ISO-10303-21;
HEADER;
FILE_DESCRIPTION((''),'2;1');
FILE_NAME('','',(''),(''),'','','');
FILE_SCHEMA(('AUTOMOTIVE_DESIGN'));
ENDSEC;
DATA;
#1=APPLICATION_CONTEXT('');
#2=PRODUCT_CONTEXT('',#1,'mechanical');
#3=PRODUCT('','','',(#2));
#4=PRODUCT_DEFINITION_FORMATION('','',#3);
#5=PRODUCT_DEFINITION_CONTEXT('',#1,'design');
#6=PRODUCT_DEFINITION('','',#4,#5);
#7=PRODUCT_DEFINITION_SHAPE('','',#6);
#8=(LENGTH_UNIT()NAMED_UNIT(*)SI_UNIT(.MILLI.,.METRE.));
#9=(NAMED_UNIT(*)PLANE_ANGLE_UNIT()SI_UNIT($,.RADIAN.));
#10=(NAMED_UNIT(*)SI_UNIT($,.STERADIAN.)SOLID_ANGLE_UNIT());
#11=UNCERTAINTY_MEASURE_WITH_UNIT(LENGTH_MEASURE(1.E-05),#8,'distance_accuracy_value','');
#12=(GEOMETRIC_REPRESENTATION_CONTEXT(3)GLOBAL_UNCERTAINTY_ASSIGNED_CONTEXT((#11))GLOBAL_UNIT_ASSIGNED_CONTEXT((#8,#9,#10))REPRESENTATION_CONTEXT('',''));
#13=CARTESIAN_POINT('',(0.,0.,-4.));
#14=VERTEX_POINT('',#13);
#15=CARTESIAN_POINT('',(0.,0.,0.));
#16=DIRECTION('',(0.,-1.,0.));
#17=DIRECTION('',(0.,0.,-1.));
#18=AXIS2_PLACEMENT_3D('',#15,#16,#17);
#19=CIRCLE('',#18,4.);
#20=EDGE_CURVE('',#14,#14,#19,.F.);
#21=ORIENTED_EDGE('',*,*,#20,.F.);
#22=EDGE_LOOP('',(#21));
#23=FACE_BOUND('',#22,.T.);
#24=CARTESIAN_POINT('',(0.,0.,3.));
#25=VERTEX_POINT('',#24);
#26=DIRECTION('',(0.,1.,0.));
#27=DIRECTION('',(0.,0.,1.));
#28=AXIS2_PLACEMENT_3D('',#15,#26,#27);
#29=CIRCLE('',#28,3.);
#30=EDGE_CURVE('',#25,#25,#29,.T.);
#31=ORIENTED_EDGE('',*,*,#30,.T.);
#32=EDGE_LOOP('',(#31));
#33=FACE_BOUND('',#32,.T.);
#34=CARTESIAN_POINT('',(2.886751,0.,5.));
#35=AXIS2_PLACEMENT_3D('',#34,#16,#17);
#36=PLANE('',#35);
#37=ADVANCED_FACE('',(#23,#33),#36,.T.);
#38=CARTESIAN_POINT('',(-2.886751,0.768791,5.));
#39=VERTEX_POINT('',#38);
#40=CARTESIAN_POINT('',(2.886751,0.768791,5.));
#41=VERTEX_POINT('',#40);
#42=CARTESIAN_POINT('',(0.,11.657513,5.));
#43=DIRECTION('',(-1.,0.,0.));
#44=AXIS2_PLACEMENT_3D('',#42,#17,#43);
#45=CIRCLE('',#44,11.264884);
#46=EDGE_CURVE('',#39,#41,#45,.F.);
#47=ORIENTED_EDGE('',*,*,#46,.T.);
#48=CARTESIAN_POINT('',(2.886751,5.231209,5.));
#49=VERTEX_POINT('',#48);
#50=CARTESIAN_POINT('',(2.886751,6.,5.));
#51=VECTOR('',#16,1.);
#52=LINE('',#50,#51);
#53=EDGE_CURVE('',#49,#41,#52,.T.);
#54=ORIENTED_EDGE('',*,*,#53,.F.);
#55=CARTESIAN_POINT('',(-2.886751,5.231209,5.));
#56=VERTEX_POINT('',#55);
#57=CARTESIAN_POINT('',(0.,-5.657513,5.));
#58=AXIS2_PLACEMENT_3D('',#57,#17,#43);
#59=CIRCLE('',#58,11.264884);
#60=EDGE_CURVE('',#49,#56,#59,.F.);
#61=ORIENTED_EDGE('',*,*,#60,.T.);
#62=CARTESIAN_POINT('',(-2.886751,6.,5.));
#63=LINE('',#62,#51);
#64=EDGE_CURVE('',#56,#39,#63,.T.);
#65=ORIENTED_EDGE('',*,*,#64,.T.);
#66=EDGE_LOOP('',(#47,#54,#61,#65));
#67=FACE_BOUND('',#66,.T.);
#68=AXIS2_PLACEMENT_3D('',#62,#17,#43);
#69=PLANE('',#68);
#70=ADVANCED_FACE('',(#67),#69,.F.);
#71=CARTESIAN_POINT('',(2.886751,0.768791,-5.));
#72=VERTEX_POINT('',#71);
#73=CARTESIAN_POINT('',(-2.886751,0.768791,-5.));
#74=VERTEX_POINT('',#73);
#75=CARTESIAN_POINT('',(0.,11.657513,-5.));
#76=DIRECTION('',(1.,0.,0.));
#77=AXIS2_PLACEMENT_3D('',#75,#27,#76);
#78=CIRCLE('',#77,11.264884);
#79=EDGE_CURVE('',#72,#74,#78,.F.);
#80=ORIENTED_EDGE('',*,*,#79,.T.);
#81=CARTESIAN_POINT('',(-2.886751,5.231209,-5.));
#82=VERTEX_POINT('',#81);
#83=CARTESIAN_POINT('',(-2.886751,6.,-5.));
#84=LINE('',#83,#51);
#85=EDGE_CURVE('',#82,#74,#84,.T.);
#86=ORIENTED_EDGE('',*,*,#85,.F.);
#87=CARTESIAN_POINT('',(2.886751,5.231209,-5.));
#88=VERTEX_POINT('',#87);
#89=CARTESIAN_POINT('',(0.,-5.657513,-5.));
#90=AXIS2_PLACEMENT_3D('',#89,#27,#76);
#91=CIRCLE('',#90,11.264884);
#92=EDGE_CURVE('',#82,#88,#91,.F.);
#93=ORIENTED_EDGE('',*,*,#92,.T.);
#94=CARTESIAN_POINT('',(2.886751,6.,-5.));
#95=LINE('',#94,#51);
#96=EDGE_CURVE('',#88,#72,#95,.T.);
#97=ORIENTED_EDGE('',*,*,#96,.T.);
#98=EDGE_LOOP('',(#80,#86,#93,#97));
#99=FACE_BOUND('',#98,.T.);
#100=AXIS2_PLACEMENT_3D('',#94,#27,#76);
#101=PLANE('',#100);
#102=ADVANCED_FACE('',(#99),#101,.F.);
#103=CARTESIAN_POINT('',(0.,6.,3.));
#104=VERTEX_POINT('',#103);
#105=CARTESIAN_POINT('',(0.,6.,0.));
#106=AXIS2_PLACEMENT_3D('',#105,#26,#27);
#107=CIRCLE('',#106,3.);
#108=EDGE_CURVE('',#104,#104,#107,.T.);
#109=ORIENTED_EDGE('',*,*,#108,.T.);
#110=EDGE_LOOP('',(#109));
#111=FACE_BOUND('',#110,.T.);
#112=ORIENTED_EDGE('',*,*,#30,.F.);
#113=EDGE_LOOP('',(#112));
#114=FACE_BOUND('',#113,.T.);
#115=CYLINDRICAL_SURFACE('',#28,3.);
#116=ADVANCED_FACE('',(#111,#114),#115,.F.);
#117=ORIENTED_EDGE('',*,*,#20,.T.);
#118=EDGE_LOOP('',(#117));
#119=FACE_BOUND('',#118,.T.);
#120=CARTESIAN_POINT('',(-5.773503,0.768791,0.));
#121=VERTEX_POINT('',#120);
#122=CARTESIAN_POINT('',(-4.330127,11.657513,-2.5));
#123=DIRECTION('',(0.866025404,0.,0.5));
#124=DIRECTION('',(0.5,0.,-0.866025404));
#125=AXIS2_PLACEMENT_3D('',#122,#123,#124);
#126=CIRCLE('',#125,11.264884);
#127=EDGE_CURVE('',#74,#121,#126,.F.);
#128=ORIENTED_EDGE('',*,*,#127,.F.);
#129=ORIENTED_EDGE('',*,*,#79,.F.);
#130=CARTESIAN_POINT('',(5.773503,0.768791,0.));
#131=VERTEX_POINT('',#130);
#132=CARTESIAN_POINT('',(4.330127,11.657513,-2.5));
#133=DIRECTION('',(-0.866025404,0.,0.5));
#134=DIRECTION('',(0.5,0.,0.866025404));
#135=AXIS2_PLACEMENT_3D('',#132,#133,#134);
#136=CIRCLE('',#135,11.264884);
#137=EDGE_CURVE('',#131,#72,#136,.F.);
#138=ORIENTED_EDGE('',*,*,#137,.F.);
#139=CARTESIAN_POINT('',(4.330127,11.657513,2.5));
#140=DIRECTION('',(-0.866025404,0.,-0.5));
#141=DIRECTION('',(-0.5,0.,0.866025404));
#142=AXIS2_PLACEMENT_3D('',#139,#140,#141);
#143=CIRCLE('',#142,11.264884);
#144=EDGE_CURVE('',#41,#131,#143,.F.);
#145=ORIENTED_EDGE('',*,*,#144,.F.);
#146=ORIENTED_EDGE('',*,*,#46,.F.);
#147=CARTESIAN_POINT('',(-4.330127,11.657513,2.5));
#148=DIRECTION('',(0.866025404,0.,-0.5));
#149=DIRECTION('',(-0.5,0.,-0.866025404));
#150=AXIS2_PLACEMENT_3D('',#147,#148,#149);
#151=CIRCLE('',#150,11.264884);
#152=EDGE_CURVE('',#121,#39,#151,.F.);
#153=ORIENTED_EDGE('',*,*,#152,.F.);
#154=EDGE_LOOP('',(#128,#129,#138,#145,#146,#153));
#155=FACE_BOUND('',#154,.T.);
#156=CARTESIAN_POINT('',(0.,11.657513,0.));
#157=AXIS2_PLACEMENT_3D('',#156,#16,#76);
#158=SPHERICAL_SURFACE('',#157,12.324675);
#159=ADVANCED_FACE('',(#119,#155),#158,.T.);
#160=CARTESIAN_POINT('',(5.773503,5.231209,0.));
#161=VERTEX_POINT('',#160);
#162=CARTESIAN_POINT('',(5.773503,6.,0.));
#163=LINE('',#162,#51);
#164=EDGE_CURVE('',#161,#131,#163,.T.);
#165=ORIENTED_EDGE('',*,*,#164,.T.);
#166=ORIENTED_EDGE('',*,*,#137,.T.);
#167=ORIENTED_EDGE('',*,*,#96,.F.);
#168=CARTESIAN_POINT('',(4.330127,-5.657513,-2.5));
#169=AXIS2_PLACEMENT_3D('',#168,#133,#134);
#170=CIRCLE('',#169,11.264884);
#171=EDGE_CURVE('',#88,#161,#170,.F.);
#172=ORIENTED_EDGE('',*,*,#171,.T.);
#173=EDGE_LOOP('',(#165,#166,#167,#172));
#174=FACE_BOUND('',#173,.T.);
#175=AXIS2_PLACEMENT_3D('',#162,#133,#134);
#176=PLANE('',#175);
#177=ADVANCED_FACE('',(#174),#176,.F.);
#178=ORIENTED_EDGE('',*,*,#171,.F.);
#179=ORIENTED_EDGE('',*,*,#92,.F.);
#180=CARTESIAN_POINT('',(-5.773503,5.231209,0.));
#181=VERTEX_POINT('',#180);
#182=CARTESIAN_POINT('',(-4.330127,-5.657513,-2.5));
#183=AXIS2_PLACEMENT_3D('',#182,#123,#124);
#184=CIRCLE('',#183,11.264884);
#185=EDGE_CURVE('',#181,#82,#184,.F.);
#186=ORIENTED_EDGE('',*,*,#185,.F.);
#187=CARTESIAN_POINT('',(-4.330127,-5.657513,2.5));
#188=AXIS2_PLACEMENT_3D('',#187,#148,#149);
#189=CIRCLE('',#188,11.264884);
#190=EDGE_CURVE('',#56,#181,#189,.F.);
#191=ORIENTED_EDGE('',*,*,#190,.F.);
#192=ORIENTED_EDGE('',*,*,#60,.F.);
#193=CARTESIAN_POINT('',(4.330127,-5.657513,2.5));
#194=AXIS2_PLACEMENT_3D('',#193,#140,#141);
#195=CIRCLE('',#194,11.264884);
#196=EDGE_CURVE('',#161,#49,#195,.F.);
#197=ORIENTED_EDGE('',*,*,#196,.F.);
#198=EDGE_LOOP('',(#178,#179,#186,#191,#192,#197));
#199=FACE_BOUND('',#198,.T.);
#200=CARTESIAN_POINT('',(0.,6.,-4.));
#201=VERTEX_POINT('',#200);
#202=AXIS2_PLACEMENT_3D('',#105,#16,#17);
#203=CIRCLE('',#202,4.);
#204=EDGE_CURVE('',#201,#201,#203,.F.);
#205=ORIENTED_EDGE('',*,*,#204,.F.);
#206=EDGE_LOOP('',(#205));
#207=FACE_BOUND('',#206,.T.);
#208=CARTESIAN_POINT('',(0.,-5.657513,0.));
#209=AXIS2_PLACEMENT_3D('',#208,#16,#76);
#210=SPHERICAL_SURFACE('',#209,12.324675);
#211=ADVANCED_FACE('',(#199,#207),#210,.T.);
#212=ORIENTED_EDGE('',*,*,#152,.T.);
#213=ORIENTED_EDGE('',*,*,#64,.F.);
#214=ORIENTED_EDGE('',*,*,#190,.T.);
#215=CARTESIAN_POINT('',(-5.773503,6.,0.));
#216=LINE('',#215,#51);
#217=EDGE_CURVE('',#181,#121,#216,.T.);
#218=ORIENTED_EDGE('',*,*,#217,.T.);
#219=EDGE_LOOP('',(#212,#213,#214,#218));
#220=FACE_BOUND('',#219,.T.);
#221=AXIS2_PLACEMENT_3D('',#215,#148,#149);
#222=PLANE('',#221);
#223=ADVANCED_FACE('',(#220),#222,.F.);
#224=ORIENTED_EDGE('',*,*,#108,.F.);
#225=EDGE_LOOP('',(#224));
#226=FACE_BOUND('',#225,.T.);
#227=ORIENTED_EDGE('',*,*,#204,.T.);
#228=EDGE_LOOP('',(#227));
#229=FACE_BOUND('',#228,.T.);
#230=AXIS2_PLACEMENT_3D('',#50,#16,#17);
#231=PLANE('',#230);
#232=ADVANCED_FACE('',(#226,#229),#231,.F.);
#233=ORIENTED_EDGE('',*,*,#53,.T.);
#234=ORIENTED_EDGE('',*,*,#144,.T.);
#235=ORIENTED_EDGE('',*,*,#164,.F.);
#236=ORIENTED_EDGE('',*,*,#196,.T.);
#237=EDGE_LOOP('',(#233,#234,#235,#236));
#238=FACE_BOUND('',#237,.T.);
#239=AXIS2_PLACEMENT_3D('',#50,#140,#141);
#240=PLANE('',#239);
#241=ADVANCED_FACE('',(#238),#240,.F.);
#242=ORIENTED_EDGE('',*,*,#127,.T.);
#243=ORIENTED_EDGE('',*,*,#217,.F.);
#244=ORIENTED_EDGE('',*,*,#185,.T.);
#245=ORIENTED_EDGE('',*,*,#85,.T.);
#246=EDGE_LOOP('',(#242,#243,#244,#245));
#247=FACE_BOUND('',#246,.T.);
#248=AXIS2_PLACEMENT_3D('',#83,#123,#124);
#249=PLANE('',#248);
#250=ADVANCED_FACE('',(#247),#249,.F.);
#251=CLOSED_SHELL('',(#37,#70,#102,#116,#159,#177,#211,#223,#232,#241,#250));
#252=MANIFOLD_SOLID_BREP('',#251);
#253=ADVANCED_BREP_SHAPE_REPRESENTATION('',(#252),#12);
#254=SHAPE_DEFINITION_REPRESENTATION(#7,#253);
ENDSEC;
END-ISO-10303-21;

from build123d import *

# Parameters (mm, degrees)
BODY_DEPTH = 6
THREAD_R   = 3
HOLE_DEPTH = 10.712534856


with BuildPart() as part:
    # profile → body (new body)
    with BuildSketch(Plane(origin=(0, 0, 0), x_dir=(1, 0, 0), z_dir=(0, 1, 0))):
        Polygon((5.773502692, 0), (2.886751346, 5), (-2.886751346, 5), (-5.773502692, 0), (-2.886751346, -5), (2.886751346, -5), align=None)
    extrude(amount=BODY_DEPTH)

    # Sketch7 → fillet 2 (revolve, cut)
    with BuildSketch(Plane.XY):
        with BuildLine():
            Line((5.773502692, 5.23120945), (5.773502692, 0.76879055))
            ThreePointArc((5.773502692, 0.76879055), (2.974697147, -0.302787414), (0, -0.667161797))
            Line((0, -0.667161797), (0, -3.492163531))
            Line((0, -3.492163531), (6.272991846, -3.492163531))
            Line((6.272991846, -3.492163531), (6.272991846, 7.504587098))
            Line((6.272991846, 7.504587098), (0, 7.504587098))
            Line((0, 7.504587098), (0, 6.667161797))
            ThreePointArc((0, 6.667161797), (2.974697147, 6.302787414), (5.773502692, 5.23120945))
        make_face()
    revolve(axis=Axis((0, 0, 0), (0, 1, 0)), mode=Mode.SUBTRACT)

    # thread (on Top Plane) → hole (cut, through all)
    with BuildSketch(Plane(origin=(0, 0, 0), x_dir=(1, 0, 0), z_dir=(0, 1, 0))):
        with Locations(Location((0, 0, 0), (0, 0, 270))):
            Circle(THREAD_R)
    extrude(amount=HOLE_DEPTH, mode=Mode.SUBTRACT)


solid = part.part
